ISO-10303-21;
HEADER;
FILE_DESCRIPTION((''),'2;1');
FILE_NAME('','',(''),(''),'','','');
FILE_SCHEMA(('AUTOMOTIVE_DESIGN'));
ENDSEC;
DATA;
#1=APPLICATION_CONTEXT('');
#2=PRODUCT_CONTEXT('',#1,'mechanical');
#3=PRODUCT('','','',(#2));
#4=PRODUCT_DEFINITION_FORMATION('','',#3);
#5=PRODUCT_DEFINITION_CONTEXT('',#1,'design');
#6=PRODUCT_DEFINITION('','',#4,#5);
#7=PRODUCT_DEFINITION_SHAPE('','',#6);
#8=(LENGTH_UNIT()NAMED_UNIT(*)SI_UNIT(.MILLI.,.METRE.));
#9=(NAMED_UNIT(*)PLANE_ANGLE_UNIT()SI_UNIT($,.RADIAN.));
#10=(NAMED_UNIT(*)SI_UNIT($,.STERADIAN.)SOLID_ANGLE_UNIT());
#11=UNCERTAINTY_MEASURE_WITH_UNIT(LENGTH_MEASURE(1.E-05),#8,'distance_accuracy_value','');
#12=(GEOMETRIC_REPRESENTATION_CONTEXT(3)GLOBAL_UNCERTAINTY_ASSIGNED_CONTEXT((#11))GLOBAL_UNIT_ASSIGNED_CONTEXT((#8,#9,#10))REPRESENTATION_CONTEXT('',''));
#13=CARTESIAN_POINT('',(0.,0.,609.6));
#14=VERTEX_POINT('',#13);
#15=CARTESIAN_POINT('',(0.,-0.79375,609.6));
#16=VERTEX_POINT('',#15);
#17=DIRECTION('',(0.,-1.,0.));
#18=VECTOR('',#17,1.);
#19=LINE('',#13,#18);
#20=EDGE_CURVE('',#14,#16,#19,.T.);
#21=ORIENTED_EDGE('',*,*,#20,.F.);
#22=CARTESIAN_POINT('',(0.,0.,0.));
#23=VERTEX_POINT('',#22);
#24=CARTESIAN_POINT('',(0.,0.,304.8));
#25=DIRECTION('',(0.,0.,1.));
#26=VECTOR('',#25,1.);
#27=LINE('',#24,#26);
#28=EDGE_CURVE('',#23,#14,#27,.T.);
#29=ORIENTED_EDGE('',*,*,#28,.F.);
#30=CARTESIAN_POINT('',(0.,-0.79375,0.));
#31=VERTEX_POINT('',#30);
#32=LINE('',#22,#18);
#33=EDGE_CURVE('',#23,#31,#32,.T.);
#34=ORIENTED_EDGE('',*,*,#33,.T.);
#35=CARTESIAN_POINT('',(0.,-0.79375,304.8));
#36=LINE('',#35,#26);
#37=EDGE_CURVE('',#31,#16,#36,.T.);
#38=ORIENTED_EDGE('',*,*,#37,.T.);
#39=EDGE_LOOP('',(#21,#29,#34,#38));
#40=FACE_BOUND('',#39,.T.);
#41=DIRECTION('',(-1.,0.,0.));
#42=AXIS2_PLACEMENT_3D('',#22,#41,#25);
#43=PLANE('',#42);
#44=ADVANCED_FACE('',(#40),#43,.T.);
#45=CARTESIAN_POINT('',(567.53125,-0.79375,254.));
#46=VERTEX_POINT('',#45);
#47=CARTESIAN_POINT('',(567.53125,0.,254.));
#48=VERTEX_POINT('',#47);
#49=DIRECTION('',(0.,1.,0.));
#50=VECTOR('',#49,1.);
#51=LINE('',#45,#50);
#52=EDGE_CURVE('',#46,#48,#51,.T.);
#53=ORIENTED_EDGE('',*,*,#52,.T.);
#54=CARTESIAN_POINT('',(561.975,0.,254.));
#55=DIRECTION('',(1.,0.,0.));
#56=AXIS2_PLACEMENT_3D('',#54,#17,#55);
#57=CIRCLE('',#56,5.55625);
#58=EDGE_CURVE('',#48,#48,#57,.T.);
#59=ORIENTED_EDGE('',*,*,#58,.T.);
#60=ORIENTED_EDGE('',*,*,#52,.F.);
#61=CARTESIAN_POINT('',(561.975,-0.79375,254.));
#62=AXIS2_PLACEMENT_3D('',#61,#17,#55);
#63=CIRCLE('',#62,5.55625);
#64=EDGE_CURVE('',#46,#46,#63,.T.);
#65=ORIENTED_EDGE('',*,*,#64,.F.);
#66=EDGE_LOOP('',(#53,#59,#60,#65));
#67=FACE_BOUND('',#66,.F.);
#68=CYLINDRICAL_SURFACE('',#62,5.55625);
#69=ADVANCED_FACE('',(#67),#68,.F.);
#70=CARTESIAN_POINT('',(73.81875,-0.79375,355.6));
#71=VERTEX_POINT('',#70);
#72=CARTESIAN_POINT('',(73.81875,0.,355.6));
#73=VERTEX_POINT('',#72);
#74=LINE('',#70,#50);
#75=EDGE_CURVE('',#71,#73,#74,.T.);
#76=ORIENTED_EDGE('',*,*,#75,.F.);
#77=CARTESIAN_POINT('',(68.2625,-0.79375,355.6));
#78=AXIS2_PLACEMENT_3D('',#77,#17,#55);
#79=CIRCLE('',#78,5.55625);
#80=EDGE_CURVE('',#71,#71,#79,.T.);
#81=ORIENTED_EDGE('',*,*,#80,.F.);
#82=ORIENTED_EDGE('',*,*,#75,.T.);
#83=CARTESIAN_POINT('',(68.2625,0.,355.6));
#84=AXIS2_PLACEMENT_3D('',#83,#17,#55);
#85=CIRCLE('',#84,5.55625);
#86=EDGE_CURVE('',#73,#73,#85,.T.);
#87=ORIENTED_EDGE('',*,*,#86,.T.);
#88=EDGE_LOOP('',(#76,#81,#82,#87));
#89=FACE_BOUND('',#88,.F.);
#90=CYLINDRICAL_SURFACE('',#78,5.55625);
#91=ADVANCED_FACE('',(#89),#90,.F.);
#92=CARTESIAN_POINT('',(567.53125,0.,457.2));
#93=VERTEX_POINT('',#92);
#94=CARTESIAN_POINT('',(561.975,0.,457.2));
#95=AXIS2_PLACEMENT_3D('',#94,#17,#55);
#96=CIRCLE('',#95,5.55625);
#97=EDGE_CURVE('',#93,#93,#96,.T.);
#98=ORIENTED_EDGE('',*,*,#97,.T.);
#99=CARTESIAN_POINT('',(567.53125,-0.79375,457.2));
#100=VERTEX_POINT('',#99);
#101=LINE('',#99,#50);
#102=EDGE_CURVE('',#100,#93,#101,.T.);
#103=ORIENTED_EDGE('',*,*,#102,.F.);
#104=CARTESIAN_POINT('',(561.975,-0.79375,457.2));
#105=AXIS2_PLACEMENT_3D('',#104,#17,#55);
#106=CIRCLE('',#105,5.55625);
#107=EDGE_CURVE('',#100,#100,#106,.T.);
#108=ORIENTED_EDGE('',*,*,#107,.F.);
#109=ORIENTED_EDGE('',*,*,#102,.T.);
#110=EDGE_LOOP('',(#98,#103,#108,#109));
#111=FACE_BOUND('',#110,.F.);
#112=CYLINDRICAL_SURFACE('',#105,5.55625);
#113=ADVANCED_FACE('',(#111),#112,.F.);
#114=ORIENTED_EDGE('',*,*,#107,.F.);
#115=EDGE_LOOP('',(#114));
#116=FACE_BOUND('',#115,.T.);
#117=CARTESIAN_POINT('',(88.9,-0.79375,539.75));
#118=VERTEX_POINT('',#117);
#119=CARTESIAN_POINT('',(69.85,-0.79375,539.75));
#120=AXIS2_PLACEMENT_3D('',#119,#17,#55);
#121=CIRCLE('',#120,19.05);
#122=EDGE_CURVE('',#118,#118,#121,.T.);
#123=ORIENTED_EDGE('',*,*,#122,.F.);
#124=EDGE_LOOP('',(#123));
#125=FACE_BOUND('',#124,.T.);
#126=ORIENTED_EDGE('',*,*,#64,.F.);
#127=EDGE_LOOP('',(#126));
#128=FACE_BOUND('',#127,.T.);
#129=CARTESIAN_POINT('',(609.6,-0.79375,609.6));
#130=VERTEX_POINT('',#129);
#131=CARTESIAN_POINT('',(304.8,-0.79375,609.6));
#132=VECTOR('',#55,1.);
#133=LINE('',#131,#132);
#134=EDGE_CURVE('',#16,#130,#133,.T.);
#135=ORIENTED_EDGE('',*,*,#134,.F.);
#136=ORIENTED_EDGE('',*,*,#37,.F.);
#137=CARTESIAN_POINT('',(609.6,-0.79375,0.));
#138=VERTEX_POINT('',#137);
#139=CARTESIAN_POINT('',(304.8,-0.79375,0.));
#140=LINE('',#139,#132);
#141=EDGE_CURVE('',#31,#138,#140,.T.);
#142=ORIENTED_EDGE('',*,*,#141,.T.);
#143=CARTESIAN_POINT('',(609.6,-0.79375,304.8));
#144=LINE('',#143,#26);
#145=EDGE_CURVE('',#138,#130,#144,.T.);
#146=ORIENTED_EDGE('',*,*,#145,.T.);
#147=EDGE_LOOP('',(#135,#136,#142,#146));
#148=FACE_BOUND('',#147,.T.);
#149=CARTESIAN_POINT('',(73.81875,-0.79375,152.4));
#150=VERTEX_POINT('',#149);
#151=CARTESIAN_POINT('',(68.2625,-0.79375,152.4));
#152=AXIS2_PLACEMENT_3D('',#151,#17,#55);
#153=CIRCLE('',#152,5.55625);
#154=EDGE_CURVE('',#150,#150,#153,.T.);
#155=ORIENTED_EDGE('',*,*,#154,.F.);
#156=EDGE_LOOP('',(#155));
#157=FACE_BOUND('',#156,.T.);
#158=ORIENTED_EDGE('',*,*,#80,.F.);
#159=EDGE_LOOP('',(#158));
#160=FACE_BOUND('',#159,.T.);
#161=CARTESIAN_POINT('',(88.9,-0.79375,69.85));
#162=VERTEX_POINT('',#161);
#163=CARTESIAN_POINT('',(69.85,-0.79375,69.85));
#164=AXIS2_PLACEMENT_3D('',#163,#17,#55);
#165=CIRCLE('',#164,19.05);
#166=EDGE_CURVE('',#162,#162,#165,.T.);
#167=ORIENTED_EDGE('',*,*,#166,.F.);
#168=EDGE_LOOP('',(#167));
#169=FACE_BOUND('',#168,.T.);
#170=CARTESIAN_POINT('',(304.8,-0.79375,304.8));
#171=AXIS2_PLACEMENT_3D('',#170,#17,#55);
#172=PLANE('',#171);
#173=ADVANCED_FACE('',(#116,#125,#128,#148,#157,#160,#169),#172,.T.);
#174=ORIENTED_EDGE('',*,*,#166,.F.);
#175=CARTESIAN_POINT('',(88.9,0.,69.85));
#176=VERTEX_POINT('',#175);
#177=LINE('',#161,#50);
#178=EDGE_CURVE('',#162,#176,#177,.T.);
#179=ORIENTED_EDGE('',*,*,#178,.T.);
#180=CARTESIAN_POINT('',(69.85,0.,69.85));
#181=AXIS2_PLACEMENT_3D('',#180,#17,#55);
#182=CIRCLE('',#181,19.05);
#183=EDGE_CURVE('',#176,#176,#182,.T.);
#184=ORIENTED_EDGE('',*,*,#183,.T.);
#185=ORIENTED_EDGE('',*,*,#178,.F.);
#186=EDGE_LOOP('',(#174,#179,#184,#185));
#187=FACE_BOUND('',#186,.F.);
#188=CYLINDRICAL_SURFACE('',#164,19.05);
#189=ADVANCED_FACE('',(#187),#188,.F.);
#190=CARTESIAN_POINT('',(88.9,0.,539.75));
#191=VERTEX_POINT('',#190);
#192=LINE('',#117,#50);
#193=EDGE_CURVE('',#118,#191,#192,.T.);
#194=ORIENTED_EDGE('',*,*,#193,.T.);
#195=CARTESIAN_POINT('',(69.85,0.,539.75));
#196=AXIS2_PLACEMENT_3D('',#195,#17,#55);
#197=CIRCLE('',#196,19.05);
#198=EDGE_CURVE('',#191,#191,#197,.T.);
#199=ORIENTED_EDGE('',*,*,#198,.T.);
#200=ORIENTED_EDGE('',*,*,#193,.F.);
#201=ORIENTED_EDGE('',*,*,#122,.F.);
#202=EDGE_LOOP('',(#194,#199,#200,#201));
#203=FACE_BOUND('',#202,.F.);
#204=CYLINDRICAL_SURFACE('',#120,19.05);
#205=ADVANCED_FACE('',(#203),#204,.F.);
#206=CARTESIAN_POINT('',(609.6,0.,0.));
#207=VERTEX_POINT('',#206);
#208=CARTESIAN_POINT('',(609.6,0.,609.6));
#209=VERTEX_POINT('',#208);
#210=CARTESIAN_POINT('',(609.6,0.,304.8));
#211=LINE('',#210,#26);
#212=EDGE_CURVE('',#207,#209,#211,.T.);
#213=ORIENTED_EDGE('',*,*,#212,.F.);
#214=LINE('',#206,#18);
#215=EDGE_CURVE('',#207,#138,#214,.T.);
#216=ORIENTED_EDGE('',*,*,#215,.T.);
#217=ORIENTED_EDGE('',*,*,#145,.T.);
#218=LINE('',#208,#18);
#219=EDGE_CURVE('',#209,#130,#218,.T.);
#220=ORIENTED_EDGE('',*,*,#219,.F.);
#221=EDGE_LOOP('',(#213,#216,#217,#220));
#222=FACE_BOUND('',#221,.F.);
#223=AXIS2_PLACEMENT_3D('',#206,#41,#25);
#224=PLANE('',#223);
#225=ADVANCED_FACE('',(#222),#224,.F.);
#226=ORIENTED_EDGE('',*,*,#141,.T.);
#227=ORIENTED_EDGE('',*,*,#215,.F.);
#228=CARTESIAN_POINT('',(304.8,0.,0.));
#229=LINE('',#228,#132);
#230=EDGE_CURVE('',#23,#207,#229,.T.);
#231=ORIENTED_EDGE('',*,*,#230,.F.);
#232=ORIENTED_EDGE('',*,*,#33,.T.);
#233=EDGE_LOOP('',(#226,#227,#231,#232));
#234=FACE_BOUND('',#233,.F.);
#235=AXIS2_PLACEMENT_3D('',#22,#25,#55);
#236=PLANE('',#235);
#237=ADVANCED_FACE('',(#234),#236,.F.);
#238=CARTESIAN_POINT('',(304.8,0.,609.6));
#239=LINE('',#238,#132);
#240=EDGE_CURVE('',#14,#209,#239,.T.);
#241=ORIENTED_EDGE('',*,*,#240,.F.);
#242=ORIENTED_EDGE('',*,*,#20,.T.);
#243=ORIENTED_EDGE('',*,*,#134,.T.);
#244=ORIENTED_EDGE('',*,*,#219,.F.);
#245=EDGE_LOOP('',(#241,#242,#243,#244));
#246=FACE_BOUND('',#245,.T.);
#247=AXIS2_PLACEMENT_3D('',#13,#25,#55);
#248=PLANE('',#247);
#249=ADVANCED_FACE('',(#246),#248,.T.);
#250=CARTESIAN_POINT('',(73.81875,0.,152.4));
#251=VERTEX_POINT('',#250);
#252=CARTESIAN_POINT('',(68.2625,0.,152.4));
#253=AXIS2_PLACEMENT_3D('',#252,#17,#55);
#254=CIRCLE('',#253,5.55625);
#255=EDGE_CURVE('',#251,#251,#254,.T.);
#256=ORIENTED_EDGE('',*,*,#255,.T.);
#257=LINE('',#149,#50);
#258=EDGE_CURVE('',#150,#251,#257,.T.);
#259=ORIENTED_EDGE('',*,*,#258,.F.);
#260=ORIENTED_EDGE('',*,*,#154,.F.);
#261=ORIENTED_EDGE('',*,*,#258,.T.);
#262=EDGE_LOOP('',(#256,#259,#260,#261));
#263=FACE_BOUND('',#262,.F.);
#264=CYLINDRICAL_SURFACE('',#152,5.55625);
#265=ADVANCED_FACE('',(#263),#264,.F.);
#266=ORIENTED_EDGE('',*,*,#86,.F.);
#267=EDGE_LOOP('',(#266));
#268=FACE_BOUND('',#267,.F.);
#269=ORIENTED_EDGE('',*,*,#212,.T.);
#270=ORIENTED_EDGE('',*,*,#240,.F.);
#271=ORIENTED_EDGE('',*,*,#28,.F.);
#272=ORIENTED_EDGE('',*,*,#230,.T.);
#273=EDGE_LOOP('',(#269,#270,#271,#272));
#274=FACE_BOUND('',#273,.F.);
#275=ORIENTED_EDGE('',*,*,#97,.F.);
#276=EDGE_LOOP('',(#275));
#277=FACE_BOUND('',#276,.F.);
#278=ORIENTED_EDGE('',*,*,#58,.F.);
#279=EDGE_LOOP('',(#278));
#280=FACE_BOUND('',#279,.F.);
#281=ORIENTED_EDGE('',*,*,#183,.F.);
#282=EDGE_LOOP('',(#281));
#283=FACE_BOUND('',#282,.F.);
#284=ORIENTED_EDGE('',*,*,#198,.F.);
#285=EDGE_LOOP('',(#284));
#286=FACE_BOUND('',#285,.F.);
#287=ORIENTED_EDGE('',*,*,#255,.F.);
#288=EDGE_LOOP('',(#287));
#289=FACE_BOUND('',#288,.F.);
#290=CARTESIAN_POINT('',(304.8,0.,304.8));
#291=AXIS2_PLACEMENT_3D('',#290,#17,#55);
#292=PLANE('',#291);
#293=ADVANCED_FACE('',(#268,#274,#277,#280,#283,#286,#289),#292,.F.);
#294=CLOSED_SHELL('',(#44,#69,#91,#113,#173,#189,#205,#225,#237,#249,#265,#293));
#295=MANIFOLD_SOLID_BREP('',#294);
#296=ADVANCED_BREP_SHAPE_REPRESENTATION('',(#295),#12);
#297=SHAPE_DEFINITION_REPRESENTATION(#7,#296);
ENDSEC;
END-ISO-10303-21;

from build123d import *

# Parameters (mm, degrees)
F0_W     = 609.6
F0_H     = 609.6
F1_DEPTH = 0.79375
F2_R     = 5.55625
F3_DEPTH = 25.4
F4_R     = 19.05
F5_DEPTH = 25.4


# Not quite as in the source:
# - a feature names something its author has since deleted; it is built from what else it names


with BuildPart() as f1:
    # F0 (on Front) → F1 (new body)
    with BuildSketch(Plane.XZ):
        with Locations((304.8, 304.8)):
            Rectangle(F0_W, F0_H)
    extrude(amount=F1_DEPTH)

    # F2 (on face) → F3 (cut)
    with BuildSketch(Plane.XZ.offset(0.79375)):
        with Locations((68.2625, 355.6)):
            Circle(F2_R)
        with Locations((68.2625, 152.4)):
            Circle(F2_R)
        with Locations((561.975, 254)):
            Circle(F2_R)
        with Locations((561.975, 457.2)):
            Circle(F2_R)
    extrude(amount=-F3_DEPTH, mode=Mode.SUBTRACT)

    # F4 (on face) → F5 (cut)
    with BuildSketch(Plane.XZ.offset(0.79375)):
        with Locations((69.85, 69.85)):
            Circle(F4_R)
        with Locations((69.85, 539.75)):
            Circle(F4_R)
    extrude(amount=-F5_DEPTH, mode=Mode.SUBTRACT)


solid = f1.part
